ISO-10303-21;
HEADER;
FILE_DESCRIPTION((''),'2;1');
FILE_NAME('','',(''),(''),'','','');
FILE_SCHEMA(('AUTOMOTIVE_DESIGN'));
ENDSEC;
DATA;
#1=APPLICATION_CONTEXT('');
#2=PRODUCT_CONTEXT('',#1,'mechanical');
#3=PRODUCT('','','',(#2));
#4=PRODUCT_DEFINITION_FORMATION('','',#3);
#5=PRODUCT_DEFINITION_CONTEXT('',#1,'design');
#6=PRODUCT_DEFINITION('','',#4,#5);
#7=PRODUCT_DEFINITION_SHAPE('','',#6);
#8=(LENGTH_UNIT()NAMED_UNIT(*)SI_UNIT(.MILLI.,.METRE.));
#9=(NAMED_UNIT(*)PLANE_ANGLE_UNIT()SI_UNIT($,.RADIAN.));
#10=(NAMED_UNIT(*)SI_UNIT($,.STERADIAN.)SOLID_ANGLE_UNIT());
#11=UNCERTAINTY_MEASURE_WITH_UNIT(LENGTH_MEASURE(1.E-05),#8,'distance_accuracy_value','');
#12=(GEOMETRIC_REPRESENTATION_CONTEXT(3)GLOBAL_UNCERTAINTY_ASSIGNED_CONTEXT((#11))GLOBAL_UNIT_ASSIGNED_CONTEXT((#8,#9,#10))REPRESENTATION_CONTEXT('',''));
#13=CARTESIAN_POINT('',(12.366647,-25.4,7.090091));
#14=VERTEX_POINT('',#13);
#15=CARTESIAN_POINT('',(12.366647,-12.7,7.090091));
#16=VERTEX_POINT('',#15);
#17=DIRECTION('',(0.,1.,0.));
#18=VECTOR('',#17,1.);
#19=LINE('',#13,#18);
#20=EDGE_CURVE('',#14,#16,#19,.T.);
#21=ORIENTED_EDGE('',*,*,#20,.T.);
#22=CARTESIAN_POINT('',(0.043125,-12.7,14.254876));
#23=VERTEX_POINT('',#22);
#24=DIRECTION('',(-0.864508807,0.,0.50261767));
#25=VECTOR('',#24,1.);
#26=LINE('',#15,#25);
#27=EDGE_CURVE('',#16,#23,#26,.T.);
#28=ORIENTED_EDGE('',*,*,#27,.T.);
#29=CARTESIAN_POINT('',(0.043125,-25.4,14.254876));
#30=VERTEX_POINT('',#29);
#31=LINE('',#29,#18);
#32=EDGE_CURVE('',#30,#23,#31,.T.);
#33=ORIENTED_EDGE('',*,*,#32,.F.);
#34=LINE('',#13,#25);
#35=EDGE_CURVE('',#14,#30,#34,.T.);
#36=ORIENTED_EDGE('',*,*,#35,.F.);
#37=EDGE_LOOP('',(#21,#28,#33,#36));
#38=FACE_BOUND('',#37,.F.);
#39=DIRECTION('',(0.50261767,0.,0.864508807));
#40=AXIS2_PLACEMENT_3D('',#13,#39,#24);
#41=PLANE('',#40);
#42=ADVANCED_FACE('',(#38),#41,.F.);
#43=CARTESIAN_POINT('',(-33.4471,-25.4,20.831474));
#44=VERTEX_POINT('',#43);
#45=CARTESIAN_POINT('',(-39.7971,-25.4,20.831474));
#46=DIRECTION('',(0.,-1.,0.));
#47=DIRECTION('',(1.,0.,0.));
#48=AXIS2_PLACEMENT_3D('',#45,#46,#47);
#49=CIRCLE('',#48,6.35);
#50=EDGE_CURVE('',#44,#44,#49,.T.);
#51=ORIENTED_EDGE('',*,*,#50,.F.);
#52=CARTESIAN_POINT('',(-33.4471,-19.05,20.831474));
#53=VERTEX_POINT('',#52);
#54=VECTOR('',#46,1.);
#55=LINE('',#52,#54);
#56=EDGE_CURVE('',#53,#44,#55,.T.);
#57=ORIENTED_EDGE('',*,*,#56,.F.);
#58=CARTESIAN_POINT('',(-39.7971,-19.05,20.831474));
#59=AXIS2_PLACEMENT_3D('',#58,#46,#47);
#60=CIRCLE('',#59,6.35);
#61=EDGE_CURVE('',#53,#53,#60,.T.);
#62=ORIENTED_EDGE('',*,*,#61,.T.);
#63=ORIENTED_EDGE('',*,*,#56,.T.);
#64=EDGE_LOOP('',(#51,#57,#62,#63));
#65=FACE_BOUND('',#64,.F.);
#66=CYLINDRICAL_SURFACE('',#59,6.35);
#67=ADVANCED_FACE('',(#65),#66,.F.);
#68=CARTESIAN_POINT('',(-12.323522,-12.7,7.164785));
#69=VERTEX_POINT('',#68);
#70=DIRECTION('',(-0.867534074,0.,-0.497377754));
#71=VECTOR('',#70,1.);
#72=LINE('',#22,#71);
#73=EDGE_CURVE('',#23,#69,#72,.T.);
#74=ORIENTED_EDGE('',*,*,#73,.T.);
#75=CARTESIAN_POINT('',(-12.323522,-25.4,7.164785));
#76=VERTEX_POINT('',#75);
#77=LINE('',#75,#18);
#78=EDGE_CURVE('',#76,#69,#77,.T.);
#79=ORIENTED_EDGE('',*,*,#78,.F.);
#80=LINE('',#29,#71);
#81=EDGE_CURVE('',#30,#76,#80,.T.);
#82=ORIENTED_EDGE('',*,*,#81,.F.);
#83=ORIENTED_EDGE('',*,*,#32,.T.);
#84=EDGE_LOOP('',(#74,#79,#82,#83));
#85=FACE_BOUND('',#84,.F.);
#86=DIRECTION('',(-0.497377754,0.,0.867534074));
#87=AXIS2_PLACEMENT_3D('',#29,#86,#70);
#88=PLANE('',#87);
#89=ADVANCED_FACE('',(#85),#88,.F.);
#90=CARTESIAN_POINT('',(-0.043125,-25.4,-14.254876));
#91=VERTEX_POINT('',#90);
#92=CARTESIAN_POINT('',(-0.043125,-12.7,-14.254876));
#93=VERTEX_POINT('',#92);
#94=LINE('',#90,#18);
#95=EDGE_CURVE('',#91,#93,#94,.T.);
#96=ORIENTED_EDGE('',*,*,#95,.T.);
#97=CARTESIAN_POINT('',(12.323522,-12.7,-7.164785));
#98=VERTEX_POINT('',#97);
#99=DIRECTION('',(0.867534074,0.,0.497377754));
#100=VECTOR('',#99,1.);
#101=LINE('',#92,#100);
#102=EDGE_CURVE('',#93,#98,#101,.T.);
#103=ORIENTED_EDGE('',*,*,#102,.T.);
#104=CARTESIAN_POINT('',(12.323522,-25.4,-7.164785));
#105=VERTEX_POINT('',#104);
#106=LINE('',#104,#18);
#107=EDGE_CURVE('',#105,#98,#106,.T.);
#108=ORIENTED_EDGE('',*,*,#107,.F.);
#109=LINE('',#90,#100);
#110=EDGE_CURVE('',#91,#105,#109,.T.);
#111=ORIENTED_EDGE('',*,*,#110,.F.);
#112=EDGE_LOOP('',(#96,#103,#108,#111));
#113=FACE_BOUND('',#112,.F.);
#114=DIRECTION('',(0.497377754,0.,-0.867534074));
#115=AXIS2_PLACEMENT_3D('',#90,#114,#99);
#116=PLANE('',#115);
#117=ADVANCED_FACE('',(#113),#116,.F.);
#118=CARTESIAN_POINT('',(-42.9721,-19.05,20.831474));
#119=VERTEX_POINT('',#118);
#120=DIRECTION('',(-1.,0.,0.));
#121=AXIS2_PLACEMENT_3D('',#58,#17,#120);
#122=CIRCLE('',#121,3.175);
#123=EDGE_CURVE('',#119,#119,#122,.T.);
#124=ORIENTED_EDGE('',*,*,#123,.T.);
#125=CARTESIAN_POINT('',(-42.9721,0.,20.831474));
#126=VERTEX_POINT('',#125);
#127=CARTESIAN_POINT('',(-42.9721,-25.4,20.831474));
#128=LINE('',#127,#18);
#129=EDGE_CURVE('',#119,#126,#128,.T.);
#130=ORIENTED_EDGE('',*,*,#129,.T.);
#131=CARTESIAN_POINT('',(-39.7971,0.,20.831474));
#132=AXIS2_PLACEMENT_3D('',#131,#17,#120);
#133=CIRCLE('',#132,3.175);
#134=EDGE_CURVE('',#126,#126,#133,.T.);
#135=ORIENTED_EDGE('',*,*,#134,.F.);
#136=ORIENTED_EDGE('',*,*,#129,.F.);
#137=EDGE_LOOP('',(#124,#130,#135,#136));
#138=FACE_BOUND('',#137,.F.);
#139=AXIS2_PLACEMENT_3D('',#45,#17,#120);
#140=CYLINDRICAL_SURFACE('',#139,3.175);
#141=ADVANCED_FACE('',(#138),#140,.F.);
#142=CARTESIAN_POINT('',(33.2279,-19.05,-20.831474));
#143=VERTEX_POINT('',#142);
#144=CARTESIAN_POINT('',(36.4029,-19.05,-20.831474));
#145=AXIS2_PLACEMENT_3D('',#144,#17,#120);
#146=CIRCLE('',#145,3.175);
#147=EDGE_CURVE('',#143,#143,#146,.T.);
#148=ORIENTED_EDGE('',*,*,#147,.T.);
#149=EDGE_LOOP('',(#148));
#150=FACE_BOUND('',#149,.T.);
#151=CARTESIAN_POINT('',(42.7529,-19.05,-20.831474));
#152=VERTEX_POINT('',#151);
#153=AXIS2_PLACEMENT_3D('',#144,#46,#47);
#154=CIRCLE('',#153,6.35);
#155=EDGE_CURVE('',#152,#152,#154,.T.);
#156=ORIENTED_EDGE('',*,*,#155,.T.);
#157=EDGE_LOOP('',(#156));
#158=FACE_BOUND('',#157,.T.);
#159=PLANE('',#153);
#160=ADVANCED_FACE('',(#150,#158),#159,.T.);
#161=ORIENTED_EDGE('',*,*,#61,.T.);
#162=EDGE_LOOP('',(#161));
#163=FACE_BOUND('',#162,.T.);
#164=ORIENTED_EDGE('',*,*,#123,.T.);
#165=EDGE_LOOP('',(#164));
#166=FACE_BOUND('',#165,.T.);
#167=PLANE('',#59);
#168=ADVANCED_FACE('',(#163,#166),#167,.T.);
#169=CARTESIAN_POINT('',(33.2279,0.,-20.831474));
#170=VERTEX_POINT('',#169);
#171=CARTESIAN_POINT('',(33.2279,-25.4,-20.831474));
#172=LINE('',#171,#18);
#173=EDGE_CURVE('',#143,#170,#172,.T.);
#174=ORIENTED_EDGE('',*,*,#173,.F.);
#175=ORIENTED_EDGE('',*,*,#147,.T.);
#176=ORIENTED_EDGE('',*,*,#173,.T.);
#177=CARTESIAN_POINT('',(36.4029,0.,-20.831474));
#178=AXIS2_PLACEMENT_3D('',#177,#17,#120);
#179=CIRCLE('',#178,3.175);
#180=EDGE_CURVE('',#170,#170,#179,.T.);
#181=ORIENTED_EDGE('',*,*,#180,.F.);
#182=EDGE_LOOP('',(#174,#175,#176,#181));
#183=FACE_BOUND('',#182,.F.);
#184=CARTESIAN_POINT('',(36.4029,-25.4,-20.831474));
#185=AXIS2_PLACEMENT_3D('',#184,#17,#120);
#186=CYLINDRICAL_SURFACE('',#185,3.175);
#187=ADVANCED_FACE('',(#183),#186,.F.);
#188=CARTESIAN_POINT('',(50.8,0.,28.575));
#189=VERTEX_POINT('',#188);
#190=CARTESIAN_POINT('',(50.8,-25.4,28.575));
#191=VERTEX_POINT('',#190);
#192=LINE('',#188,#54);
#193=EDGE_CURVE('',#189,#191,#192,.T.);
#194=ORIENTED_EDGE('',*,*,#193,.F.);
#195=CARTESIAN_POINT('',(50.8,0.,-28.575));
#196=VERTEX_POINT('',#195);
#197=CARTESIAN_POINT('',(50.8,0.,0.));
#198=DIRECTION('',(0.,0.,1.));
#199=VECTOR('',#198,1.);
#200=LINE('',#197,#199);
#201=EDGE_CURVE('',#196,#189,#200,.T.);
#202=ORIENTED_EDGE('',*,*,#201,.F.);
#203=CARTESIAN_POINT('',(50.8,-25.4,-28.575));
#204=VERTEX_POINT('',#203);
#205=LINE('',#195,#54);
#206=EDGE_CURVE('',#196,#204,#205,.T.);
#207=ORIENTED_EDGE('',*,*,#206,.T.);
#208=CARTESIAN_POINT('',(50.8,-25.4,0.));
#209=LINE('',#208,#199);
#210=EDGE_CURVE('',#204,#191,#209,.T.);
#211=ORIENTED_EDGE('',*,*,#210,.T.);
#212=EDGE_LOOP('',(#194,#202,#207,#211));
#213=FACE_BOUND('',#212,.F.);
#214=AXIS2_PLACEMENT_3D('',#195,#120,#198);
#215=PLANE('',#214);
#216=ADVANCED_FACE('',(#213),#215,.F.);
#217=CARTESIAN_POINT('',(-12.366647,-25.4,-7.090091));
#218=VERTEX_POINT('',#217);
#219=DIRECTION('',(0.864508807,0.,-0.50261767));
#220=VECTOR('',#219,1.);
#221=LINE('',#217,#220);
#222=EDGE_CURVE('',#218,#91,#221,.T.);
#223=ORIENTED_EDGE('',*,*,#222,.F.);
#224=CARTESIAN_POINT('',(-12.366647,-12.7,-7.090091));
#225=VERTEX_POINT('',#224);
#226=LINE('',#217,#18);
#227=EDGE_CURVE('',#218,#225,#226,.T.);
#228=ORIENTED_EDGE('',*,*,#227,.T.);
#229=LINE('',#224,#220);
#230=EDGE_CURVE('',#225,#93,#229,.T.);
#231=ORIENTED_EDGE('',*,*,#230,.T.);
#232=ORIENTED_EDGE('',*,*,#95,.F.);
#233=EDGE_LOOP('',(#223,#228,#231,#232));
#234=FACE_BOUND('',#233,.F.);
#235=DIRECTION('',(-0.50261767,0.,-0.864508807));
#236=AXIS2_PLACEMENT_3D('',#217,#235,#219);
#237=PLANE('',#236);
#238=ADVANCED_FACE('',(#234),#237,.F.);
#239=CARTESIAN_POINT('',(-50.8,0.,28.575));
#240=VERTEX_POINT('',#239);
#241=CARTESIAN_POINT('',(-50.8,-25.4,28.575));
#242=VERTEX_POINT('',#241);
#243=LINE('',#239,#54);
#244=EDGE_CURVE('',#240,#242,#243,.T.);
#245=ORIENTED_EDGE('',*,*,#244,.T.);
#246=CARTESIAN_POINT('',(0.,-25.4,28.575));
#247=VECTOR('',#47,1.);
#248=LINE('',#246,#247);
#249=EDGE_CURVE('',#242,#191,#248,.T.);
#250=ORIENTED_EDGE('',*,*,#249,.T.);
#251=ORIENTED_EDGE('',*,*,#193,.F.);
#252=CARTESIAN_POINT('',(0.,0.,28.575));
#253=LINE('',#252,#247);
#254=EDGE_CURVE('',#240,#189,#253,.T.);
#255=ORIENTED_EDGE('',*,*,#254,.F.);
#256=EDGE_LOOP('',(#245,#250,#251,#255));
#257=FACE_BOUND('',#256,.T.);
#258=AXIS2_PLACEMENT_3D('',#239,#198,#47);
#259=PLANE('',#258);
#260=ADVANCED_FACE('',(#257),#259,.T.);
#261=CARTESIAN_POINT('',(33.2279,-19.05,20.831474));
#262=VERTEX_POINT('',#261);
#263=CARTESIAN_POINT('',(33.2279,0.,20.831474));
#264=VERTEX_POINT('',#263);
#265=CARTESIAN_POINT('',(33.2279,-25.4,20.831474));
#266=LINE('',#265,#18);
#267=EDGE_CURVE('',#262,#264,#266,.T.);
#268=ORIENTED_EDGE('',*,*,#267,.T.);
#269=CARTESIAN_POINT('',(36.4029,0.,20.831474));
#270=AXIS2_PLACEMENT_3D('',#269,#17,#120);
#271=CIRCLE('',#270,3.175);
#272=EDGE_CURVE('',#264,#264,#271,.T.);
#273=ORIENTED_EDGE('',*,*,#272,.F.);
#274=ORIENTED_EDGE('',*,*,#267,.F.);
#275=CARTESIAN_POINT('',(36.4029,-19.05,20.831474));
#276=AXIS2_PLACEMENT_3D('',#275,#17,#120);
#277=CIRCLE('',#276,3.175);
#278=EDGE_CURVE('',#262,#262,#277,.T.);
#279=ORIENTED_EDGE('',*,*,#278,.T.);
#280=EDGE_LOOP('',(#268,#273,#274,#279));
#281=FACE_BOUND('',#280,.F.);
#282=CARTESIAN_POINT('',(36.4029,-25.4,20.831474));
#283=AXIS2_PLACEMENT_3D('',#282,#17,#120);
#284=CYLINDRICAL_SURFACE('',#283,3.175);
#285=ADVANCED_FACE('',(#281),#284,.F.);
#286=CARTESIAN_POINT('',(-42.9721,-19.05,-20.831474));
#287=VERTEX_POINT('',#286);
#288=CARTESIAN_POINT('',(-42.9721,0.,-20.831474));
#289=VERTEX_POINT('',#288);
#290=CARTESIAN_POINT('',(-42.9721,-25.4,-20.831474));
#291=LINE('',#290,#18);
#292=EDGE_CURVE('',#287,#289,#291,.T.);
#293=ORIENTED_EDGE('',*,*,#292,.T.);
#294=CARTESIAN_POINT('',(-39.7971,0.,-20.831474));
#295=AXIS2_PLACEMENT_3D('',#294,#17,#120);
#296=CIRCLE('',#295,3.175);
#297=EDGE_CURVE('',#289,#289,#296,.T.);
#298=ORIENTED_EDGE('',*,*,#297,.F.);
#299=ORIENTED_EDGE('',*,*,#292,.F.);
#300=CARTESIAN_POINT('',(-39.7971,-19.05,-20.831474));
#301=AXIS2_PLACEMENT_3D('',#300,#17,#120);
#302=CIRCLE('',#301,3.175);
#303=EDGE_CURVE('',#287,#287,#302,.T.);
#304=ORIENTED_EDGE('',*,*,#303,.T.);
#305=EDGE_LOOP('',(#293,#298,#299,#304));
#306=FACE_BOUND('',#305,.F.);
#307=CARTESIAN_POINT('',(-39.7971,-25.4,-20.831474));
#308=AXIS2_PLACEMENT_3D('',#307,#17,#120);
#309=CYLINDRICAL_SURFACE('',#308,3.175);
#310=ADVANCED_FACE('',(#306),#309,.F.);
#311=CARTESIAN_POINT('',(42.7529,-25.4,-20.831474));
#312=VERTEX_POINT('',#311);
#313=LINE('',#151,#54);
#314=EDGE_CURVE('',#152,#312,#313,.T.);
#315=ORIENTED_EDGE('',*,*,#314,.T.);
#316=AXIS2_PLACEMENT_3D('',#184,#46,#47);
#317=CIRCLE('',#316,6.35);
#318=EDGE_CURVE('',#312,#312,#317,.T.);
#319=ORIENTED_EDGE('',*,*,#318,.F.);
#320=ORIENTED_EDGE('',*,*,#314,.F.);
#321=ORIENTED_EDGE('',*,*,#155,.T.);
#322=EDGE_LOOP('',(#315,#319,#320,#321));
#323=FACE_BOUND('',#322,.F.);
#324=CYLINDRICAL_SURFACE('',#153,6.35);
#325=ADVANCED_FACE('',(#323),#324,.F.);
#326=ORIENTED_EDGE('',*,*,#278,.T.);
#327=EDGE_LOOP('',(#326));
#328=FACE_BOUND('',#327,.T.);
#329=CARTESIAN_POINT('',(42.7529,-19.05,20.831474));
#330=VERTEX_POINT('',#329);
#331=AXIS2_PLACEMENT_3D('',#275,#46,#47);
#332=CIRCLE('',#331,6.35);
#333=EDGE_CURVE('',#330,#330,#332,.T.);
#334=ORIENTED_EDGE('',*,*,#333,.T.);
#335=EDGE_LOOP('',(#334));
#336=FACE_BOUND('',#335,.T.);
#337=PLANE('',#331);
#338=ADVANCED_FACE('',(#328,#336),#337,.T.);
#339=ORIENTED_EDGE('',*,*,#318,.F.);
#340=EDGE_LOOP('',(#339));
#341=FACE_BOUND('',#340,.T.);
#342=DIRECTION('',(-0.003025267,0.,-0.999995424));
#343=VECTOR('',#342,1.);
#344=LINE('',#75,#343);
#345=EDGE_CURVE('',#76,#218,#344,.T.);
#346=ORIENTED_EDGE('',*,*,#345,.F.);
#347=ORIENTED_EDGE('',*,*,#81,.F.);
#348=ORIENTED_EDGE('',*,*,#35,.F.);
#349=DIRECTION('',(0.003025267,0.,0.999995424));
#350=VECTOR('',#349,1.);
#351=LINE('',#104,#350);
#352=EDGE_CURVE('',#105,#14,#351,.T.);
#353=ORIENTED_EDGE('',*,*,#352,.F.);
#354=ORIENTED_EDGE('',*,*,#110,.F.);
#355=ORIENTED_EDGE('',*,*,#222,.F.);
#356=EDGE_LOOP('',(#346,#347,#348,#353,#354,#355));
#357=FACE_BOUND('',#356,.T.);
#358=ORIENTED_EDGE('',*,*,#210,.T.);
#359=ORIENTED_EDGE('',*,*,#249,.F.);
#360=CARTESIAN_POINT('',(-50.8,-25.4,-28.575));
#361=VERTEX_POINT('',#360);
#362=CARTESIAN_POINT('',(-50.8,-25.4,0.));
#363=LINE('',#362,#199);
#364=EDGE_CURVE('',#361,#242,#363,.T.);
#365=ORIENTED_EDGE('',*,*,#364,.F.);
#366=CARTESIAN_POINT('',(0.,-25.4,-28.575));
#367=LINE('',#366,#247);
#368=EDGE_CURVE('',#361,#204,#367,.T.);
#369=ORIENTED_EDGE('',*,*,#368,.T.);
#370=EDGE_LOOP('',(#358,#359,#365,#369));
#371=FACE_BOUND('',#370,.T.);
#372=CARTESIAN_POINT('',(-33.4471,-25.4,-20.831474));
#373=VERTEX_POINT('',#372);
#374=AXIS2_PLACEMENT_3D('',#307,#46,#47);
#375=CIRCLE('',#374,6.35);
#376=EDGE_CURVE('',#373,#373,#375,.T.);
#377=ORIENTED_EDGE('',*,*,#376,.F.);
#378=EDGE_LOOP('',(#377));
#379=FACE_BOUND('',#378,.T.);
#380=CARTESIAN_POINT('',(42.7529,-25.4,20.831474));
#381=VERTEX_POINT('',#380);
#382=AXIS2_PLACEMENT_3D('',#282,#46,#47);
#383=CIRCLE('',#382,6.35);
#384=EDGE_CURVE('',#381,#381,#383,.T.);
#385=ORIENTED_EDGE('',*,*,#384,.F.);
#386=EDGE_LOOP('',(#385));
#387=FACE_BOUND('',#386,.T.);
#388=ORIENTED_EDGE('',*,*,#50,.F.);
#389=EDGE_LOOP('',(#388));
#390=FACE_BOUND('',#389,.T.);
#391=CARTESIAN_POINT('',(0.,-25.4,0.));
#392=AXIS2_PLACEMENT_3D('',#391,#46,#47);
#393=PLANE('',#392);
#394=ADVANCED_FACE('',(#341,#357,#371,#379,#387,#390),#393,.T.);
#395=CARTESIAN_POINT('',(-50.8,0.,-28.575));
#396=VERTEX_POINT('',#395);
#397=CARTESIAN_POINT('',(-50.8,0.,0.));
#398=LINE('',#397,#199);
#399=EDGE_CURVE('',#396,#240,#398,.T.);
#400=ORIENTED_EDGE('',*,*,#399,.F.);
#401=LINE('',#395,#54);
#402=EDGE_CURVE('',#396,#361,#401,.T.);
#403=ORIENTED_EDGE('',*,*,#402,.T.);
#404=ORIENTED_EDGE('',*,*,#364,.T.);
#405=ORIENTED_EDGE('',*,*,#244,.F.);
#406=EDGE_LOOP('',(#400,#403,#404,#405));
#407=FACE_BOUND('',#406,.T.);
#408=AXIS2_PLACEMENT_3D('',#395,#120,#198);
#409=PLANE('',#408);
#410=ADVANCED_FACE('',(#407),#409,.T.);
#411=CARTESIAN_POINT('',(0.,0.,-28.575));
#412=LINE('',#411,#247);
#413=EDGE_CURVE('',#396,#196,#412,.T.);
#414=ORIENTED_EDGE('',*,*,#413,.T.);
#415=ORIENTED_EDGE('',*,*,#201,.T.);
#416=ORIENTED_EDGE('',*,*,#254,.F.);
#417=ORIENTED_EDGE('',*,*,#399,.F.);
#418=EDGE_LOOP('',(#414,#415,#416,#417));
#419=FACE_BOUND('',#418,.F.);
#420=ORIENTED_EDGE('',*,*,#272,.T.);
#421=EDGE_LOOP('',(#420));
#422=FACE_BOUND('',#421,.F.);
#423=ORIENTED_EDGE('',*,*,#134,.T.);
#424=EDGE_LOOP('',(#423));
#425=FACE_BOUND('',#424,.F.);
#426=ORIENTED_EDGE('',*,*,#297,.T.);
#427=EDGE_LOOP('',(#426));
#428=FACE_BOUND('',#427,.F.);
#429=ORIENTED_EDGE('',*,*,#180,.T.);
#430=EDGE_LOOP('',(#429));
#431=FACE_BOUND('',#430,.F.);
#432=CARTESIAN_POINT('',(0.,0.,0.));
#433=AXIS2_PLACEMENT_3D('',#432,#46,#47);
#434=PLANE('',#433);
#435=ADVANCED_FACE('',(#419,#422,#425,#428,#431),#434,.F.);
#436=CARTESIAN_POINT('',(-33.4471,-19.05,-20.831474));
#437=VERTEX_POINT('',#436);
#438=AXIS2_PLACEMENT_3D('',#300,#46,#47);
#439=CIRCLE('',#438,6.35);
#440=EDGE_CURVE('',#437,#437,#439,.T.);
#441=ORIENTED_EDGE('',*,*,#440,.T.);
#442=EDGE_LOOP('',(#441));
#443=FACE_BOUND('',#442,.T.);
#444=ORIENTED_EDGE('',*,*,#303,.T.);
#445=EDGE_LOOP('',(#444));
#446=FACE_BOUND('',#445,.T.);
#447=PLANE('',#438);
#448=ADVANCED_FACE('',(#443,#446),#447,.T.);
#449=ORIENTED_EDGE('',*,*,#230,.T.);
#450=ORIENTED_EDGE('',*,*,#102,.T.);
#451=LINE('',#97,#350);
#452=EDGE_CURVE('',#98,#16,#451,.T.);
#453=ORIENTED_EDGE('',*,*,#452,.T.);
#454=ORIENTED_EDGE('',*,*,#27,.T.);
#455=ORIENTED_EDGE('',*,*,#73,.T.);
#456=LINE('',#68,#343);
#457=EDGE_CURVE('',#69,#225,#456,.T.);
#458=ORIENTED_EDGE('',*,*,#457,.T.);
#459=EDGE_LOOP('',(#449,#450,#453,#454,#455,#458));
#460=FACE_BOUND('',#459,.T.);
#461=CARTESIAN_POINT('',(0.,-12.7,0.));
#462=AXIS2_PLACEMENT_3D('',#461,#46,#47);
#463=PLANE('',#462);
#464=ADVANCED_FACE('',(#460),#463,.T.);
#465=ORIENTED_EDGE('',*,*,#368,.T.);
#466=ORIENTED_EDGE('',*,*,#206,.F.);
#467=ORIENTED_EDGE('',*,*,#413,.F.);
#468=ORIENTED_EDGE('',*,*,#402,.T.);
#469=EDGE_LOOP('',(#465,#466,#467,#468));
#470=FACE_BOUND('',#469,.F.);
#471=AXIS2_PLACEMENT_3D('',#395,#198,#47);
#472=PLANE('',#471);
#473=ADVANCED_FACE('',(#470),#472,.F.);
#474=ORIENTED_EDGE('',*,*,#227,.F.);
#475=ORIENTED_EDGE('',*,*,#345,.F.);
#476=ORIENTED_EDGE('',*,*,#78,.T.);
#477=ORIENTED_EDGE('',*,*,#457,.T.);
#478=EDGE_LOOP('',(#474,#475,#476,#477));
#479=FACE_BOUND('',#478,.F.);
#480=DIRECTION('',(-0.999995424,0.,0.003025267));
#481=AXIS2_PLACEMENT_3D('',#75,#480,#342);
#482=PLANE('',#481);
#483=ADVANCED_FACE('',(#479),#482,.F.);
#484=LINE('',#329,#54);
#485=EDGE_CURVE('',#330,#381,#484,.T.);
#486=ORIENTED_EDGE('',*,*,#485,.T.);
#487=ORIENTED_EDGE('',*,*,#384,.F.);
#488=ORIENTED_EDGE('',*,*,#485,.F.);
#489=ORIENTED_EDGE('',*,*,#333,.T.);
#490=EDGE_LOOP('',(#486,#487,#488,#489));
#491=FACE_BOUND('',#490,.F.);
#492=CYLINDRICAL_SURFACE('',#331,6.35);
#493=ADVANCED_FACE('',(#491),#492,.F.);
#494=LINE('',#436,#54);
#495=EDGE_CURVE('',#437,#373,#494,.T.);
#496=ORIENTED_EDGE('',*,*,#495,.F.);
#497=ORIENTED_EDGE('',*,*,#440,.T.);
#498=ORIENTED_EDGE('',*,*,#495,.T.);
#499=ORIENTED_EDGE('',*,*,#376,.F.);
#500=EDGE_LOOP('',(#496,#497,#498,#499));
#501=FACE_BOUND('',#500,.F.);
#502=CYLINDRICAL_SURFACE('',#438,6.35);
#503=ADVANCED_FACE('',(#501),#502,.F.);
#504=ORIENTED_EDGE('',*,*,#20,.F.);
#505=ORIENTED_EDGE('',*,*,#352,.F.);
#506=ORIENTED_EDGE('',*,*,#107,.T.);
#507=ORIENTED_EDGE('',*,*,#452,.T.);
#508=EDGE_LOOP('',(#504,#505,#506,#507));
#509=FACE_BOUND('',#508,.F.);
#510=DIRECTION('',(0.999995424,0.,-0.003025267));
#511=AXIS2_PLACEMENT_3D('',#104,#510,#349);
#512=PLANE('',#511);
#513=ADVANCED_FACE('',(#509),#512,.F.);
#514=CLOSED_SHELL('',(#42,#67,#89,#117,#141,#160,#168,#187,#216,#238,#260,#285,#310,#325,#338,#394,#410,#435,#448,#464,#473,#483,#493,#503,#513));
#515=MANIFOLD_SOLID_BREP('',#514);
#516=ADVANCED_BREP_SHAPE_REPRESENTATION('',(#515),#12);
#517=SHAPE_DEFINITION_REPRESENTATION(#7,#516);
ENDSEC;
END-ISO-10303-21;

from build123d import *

# Parameters (mm, degrees)
F0_W           = 101.6
F0_H           = 57.15
F1_DEPTH       = 25.4
F3_D           = 6.35
F3_CBORE_D     = 12.7
F3_CBORE_DEPTH = 6.35
F5_DEPTH       = 12.7


with BuildPart() as f1:
    # F0 (on Front) → F1 (new body)
    with BuildSketch(Plane.XZ):
        Rectangle(F0_W, F0_H)
    extrude(amount=F1_DEPTH)

    # F3 (through all)
    with Locations(Plane.XZ.offset(25.4)):
        with Locations((36.4028997615, 20.831474103), (36.4028997615, -20.831474103), (-39.7971002385, 20.831474103), (-39.7971002385, -20.831474103)):
            CounterBoreHole(F3_D / 2, F3_CBORE_D / 2, F3_CBORE_DEPTH)

    # F4 (on face) → F5 (cut)
    with BuildSketch(Plane.XZ.offset(25.4)):
        Polygon((-0.0431249981, -14.2548758505), (12.3235221152, -7.1647852691), (12.3666471133, 7.0900905813), (0.0431249981, 14.2548758505), (-12.3235221152, 7.1647852691), (-12.3666471133, -7.0900905813), align=None)
    extrude(amount=-F5_DEPTH, mode=Mode.SUBTRACT)


solid = f1.part
